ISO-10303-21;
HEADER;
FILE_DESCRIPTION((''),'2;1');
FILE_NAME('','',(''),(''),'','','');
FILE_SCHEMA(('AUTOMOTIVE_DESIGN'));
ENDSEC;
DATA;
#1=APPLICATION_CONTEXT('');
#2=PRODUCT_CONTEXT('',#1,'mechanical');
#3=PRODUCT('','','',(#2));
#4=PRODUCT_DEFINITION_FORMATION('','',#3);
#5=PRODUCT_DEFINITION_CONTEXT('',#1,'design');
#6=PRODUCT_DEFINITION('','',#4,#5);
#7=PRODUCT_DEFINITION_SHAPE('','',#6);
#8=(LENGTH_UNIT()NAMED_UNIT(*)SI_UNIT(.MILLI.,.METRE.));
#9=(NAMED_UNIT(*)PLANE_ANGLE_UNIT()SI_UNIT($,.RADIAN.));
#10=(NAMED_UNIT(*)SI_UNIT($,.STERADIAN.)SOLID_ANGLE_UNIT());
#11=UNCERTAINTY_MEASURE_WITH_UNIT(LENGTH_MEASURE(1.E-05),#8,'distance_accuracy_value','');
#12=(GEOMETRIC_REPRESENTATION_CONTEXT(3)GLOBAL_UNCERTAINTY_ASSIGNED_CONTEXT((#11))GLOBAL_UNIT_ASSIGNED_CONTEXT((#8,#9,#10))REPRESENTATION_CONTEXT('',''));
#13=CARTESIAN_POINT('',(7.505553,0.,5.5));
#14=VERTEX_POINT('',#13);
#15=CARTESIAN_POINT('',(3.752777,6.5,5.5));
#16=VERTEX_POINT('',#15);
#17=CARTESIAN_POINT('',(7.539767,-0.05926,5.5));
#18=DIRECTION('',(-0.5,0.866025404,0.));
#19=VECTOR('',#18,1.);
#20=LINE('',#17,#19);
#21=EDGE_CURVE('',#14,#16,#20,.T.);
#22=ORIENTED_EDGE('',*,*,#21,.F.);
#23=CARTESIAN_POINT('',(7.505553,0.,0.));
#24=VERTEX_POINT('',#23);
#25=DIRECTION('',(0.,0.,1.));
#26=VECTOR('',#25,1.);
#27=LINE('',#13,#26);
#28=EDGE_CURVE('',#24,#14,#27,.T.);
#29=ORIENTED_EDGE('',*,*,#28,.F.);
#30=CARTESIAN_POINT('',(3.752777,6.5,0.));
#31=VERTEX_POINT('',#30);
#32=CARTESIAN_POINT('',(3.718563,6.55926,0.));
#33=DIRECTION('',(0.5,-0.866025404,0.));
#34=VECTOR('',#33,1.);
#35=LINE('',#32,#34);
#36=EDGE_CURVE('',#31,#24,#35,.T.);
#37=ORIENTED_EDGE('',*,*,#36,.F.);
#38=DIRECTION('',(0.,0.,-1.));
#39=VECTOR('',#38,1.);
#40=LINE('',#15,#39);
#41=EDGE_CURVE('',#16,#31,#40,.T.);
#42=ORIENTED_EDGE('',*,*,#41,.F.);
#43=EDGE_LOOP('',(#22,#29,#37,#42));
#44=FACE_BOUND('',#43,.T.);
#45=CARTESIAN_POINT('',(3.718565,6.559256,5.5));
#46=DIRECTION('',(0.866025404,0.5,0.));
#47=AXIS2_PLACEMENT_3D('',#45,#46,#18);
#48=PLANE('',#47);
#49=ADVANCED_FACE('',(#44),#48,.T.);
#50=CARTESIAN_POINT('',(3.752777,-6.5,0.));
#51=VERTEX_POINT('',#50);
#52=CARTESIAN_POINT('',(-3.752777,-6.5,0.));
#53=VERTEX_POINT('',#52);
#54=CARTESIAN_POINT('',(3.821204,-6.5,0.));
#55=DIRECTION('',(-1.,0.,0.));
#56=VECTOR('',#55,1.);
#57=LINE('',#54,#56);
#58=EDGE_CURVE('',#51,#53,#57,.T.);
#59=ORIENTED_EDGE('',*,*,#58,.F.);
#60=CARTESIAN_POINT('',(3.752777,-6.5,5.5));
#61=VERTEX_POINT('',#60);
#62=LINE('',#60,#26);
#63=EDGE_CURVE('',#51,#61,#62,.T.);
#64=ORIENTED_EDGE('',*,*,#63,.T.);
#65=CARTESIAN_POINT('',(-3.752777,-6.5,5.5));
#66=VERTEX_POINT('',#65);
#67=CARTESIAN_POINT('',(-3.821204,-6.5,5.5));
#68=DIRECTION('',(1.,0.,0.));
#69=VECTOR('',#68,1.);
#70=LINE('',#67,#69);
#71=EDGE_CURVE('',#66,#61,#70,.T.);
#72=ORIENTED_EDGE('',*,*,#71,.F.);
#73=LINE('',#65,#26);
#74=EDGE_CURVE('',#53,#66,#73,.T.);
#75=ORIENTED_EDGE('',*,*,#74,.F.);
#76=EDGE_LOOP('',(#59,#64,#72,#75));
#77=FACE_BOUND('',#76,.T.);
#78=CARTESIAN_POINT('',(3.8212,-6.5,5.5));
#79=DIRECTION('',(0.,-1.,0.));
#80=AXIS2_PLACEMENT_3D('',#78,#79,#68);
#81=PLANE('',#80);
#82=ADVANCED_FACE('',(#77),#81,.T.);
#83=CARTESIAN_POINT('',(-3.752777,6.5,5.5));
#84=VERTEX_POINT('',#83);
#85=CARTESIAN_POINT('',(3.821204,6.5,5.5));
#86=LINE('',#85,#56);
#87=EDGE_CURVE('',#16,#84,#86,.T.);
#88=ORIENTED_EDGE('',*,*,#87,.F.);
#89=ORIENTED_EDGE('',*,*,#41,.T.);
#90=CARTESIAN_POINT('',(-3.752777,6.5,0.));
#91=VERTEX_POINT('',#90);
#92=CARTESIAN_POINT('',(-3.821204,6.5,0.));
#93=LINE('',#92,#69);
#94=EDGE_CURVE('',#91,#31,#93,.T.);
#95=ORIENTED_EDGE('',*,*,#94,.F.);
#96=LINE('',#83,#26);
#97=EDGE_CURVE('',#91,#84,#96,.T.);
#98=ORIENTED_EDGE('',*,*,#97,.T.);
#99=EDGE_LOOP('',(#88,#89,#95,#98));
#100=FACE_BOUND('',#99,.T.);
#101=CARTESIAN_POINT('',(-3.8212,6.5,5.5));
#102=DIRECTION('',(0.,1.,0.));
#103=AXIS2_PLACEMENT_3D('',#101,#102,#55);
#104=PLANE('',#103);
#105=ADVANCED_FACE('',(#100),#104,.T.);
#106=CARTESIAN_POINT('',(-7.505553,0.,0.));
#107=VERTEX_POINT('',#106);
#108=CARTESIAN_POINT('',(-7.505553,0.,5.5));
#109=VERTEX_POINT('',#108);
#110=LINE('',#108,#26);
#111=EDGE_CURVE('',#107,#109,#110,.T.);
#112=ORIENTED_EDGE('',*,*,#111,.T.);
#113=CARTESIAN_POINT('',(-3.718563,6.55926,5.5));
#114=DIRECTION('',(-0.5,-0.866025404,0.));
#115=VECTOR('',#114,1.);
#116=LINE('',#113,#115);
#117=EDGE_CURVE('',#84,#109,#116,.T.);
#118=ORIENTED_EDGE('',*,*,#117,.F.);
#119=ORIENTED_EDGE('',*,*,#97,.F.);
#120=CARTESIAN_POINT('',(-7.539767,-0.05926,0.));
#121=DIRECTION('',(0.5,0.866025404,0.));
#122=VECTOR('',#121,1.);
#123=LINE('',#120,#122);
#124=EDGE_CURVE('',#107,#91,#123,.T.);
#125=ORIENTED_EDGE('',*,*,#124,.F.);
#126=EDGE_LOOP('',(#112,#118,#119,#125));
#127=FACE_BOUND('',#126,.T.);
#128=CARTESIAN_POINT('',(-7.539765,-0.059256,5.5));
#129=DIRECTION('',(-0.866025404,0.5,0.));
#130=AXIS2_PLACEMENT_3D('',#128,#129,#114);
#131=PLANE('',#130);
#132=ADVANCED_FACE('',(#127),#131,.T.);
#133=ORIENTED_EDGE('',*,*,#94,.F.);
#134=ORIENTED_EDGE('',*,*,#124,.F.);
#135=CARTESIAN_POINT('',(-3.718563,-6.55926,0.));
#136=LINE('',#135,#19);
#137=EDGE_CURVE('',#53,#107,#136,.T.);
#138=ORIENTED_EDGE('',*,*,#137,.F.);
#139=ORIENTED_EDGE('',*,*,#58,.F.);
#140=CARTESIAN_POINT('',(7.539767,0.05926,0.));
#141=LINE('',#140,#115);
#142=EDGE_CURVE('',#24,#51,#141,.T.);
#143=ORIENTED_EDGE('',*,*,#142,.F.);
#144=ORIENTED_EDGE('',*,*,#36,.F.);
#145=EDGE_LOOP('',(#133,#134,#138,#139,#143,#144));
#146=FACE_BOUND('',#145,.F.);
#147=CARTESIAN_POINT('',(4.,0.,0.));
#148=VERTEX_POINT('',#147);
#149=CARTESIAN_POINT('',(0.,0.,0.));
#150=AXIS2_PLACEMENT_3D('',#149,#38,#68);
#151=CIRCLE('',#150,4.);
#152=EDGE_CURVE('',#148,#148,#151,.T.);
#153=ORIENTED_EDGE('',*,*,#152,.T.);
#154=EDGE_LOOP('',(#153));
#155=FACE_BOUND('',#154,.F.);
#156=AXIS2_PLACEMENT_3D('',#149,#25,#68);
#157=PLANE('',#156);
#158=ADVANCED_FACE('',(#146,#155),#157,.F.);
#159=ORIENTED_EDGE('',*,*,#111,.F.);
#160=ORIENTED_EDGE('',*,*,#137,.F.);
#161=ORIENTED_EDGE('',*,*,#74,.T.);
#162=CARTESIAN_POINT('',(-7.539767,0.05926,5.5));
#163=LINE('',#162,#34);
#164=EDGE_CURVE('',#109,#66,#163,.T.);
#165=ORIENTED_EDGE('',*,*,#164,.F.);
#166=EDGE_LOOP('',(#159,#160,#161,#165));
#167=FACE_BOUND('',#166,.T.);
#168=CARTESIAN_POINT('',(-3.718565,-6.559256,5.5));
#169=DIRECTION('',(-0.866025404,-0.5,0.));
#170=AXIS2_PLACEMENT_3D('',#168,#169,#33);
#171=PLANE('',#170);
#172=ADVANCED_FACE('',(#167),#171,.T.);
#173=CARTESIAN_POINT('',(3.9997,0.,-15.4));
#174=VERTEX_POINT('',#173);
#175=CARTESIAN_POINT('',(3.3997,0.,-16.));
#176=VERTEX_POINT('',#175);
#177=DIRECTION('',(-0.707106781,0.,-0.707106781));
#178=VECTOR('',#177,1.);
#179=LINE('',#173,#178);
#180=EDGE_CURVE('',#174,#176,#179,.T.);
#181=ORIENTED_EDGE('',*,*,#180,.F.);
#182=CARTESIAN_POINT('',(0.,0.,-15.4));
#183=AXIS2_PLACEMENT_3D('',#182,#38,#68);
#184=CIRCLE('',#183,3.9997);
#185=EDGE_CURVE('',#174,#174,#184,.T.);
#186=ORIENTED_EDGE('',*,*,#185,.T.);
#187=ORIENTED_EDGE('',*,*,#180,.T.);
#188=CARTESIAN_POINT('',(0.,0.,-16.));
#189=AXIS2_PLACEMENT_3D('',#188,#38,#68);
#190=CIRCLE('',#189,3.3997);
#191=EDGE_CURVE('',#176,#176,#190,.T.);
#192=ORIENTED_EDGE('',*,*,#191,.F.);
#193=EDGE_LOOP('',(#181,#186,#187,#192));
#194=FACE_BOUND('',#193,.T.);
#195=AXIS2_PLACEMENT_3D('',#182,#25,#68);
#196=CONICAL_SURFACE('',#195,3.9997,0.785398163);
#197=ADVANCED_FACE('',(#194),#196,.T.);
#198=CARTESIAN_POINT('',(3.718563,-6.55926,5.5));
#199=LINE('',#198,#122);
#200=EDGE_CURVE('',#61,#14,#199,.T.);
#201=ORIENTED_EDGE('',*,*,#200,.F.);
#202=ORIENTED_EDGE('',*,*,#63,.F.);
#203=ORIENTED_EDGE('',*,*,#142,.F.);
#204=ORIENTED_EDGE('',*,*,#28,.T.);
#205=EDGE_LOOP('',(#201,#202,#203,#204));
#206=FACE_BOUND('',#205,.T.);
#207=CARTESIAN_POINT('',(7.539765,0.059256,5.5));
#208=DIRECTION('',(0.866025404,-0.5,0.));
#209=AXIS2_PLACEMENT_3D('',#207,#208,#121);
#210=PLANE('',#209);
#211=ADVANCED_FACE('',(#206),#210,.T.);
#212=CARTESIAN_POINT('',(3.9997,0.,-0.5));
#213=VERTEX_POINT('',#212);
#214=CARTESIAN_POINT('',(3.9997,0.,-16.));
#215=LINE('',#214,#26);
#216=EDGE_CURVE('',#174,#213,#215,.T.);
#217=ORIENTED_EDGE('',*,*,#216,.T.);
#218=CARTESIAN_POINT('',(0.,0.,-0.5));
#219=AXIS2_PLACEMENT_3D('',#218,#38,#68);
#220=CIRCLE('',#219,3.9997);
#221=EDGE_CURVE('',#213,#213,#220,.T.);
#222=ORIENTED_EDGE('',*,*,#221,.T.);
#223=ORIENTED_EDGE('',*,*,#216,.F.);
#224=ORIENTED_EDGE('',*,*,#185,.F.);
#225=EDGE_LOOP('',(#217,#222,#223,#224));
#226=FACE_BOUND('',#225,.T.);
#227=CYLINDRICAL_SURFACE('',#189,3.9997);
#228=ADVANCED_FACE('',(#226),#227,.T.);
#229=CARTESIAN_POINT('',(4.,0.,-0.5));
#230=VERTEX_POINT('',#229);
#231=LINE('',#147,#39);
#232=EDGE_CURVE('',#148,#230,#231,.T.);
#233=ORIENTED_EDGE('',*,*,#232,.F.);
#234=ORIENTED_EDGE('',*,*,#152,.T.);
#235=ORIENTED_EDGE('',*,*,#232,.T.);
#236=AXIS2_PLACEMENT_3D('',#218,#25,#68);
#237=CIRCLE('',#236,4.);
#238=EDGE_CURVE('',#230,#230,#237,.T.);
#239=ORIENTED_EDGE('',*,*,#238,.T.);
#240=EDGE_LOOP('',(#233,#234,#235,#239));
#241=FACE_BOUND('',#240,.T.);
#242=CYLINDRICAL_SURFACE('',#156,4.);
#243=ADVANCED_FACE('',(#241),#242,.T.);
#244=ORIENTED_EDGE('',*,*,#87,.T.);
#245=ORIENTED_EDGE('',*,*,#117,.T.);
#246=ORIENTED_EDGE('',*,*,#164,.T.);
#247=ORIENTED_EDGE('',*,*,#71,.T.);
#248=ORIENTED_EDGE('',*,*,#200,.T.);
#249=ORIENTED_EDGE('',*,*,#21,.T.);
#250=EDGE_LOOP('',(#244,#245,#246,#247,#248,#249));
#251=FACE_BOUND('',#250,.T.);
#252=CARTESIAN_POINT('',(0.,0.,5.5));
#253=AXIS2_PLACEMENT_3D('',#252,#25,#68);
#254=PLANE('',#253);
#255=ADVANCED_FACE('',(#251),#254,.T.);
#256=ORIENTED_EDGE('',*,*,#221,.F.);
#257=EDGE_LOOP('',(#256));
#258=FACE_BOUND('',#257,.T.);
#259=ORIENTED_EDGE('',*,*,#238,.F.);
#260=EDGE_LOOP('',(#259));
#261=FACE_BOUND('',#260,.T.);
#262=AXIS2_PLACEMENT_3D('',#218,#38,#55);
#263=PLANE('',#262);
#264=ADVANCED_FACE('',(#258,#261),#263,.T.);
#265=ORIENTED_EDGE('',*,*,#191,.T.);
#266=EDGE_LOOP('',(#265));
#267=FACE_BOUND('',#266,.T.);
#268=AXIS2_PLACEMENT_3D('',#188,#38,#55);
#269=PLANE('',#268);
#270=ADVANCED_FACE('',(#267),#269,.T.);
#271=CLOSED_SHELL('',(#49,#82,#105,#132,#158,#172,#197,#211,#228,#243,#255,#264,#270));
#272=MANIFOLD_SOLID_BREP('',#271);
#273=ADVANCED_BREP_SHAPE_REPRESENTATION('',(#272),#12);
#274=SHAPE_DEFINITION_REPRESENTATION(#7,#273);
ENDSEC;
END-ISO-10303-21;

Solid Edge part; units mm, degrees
sketch "Sketch1" plane through (0, 0, 0) normal (0, 0, 1) x (1, 0, 0)
  circle A0 centre (0, 0) radius 7.54
  dimension "D1" = 15.08
extrude "Protrusion1" add sketch "Sketch1" along normal blind 5.5
sketch "Sketch2" plane through (0, 0, 0) normal (0, 0, -1) x (1, 0, 0)
  circle A0 centre (0, 0) radius 4
extrude "Protrusion2" add sketch "Sketch2" along normal blind 16
sketch "Sketch3" plane through (0, 0, -16) normal (0, 0, -1) x (1, 0, 0)
  circle A0 centre (0, 0) radius 3.9997
extrude "Cutout1" cut sketch "Sketch3" against normal blind 15.5 flip side to cut
chamfer "Chamfer_1" distance 0.6 angle 45 1 edges at (-3.9997, 0, -16)
sketch "Sketch4" plane through (0, 0, 5.5) normal (0, 0, 1) x (1, 0, 0)
  line L0 (-3.8212, 6.5) -> (3.8212, 6.5)
  dimension "D1" = 13
extrude "Cutout2" cut sketch "Sketch4" against normal up to next material side at (0, 6.55, 5.5)
pattern_circular "Pattern1" count 6 over 360 about axis through (0, 0, 5.5) along (0, 0, 1) of "Cutout2"
properties part number "24101198"
